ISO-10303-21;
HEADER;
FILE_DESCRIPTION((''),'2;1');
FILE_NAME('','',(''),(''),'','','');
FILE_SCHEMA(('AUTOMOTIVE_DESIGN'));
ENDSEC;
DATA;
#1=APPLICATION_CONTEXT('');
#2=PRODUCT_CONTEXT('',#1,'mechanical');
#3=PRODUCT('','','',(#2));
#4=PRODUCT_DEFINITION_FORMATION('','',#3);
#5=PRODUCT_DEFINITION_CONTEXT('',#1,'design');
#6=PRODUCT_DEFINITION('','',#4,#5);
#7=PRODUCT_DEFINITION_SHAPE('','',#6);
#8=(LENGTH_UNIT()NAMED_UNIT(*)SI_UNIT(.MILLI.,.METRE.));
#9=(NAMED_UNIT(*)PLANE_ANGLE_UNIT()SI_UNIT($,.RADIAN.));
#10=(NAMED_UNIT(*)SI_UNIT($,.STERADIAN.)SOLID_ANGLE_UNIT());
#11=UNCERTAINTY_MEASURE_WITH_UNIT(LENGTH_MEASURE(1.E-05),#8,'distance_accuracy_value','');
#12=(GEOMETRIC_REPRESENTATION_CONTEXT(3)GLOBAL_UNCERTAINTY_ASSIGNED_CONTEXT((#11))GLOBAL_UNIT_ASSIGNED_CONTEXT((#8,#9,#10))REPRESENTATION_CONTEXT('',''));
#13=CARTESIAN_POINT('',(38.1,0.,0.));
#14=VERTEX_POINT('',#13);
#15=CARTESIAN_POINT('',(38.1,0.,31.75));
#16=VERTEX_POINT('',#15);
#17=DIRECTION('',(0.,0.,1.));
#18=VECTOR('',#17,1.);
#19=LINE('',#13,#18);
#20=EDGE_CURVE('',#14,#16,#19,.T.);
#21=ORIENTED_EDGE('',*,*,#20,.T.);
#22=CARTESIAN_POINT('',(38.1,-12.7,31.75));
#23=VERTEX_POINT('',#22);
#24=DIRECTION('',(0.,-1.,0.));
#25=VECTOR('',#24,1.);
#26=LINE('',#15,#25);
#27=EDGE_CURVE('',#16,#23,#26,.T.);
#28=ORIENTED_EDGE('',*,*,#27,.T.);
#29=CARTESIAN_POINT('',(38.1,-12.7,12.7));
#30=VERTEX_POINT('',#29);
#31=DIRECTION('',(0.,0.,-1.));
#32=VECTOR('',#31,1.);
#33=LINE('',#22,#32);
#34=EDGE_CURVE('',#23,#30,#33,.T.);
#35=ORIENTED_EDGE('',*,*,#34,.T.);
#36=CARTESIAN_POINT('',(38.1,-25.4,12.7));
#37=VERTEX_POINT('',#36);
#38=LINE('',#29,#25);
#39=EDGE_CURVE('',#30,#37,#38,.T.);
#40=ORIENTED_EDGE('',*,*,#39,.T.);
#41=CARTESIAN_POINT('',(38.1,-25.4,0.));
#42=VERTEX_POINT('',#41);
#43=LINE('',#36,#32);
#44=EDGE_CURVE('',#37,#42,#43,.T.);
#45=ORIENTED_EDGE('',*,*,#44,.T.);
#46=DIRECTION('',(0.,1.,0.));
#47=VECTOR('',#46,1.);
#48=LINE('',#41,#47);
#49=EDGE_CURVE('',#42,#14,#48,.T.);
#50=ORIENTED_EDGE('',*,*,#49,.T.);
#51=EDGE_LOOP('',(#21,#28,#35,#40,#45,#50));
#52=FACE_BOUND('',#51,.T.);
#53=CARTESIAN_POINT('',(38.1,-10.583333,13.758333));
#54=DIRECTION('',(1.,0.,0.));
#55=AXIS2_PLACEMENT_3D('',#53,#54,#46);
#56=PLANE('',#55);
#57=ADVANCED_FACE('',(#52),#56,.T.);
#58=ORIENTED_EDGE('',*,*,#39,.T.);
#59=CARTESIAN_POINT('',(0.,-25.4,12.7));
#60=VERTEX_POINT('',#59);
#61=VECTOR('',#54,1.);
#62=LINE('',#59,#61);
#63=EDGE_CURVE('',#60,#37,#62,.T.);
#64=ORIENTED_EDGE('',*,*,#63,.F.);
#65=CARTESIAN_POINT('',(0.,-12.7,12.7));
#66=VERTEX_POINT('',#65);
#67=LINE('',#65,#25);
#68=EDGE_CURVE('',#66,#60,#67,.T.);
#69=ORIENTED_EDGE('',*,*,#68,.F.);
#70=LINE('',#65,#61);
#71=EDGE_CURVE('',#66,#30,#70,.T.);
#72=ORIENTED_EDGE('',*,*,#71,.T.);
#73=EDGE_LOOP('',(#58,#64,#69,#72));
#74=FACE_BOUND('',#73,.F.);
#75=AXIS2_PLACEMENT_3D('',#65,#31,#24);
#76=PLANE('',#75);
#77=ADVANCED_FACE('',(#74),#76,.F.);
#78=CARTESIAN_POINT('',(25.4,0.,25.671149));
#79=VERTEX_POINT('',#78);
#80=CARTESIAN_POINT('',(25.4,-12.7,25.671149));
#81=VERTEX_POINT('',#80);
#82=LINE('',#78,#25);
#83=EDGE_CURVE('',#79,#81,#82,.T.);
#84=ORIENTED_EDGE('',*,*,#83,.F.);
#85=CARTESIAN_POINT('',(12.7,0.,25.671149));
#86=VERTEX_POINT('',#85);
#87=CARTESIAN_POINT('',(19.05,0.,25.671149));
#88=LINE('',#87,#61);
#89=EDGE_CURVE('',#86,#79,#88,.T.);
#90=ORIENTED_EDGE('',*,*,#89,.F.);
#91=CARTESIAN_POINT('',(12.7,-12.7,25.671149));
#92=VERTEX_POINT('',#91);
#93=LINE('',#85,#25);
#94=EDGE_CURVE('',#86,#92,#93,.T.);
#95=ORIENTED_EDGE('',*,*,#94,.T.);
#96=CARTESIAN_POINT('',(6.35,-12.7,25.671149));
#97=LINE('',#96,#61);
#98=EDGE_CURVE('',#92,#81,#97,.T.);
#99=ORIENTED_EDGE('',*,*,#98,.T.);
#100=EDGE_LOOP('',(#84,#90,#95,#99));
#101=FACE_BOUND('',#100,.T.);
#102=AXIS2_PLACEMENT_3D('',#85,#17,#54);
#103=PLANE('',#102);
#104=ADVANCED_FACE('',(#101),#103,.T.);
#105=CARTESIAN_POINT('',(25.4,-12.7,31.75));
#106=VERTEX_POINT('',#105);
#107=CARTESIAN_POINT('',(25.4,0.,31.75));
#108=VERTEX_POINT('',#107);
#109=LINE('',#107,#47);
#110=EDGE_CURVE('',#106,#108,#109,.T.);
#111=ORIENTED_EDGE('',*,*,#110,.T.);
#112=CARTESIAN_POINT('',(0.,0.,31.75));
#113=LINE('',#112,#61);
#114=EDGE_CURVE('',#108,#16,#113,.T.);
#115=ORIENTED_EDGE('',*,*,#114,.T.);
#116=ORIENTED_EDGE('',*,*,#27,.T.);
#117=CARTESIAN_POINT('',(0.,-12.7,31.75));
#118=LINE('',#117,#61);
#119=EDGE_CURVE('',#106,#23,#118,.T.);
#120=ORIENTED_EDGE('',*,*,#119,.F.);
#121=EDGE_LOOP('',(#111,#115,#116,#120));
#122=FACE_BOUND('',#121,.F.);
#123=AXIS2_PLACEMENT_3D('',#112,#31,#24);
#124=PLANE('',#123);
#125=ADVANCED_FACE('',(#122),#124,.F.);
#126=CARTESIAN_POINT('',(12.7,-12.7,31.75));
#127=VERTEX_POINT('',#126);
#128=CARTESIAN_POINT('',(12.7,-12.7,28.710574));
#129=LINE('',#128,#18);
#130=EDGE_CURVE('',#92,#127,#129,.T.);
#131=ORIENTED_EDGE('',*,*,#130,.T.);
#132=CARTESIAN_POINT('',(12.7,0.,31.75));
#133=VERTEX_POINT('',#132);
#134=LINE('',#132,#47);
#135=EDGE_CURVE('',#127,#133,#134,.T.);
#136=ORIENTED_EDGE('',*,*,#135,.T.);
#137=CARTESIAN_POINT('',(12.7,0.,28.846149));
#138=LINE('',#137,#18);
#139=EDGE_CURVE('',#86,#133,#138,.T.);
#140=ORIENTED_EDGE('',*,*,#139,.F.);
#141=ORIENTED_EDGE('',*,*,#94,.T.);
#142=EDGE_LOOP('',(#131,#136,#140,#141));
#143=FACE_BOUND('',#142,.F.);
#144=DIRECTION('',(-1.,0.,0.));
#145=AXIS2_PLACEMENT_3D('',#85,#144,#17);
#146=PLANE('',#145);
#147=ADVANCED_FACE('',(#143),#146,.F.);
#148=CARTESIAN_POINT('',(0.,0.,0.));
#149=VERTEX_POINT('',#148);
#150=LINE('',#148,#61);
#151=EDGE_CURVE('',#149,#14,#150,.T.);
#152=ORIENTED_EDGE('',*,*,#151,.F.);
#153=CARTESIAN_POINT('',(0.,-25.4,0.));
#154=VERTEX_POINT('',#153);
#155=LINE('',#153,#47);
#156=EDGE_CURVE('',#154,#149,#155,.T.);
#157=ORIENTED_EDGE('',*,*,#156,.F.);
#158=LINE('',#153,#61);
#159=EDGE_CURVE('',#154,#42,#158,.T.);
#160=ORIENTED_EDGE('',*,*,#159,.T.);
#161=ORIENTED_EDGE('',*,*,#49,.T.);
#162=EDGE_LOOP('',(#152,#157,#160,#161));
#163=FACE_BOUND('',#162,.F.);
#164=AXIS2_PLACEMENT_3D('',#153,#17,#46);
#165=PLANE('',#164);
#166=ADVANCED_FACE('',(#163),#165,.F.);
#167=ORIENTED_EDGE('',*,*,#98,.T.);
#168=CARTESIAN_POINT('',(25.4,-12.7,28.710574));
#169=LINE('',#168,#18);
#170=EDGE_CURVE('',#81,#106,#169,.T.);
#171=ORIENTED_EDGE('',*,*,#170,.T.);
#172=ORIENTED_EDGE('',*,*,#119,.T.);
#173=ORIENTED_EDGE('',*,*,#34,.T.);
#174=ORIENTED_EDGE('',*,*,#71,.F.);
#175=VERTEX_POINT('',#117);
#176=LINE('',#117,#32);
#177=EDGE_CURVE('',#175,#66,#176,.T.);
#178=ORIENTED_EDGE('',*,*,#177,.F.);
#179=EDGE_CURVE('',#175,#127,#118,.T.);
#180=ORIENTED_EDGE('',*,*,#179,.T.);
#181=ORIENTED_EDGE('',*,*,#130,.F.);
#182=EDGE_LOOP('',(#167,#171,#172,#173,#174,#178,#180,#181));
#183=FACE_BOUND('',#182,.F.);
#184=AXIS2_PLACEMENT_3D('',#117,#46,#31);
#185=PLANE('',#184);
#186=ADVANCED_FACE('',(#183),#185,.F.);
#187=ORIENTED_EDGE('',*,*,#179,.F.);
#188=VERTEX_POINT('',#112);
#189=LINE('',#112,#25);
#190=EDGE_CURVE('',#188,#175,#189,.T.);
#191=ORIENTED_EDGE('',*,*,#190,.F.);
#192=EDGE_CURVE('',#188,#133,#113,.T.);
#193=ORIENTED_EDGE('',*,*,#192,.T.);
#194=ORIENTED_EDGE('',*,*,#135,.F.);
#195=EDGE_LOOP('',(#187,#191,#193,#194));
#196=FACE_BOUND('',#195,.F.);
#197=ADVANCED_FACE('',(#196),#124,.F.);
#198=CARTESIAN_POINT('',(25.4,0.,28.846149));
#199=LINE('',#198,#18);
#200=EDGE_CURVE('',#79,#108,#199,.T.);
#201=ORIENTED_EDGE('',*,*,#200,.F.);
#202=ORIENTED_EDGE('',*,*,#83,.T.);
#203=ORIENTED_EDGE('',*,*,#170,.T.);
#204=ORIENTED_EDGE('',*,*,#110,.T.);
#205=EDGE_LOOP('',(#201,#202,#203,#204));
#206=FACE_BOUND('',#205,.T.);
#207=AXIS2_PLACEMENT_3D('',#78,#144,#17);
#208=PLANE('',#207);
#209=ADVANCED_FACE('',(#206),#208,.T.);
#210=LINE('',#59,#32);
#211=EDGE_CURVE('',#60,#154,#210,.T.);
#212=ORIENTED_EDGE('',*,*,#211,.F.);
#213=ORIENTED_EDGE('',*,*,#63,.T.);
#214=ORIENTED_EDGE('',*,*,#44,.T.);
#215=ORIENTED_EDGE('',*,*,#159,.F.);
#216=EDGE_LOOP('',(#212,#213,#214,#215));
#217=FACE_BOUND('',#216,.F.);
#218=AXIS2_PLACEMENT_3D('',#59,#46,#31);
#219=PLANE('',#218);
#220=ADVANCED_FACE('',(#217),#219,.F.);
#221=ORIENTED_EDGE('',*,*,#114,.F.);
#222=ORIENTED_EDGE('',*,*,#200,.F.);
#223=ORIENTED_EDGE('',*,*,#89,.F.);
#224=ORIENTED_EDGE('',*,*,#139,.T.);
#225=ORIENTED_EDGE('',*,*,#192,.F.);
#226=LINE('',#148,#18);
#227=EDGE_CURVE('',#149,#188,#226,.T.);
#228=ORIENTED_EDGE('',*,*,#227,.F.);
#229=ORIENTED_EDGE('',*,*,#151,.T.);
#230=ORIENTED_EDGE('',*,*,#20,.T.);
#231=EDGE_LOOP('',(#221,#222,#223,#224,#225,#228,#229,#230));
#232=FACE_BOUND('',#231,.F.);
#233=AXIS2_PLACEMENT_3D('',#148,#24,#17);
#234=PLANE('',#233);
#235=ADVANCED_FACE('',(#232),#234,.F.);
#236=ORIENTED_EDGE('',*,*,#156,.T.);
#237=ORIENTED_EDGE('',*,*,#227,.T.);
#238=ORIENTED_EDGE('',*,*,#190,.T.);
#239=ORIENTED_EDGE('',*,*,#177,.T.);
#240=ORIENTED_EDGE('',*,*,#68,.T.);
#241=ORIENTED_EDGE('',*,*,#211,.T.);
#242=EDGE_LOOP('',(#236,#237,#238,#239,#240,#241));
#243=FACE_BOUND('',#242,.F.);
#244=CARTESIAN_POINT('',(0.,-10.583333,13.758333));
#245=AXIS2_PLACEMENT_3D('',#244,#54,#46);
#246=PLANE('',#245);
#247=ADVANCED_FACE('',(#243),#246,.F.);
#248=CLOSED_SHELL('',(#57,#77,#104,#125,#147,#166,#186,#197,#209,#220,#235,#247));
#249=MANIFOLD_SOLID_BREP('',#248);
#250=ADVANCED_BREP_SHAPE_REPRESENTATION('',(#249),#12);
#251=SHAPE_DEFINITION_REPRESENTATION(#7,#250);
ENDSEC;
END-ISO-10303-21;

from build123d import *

# Parameters (mm, degrees)
F1_DEPTH = 38.1
F2_W     = 12.7
F2_H     = 12.7
F3_DEPTH = 25.4
F4_W     = 12.7
F4_H     = 6.35
F5_DEPTH = 25.4


# Not quite as in the source:
# - a feature names something its author has since deleted; it is built from what else it names


with BuildPart() as f1:
    # F0 (on Right) → F1 (new body)
    with BuildSketch(Plane.YZ):
        Polygon((-25.4, 0), (0, 0), (0, 31.75), (-12.7, 31.75), (-12.7, 12.7), (-25.4, 12.7), align=None)
    extrude(amount=F1_DEPTH)

    # F2 (on Top) → F3 (join)
    with BuildSketch(Plane.XY):
        with Locations((19.05, -6.35)):
            Rectangle(F2_W, F2_H)
    extrude(amount=F3_DEPTH)

    # F4 (on Front) → F5 (cut)
    with BuildSketch(Plane.XZ):
        with Locations((19.05, 28.8461486514)):
            Rectangle(F4_W, F4_H)
    extrude(amount=F5_DEPTH, mode=Mode.SUBTRACT)


solid = f1.part
